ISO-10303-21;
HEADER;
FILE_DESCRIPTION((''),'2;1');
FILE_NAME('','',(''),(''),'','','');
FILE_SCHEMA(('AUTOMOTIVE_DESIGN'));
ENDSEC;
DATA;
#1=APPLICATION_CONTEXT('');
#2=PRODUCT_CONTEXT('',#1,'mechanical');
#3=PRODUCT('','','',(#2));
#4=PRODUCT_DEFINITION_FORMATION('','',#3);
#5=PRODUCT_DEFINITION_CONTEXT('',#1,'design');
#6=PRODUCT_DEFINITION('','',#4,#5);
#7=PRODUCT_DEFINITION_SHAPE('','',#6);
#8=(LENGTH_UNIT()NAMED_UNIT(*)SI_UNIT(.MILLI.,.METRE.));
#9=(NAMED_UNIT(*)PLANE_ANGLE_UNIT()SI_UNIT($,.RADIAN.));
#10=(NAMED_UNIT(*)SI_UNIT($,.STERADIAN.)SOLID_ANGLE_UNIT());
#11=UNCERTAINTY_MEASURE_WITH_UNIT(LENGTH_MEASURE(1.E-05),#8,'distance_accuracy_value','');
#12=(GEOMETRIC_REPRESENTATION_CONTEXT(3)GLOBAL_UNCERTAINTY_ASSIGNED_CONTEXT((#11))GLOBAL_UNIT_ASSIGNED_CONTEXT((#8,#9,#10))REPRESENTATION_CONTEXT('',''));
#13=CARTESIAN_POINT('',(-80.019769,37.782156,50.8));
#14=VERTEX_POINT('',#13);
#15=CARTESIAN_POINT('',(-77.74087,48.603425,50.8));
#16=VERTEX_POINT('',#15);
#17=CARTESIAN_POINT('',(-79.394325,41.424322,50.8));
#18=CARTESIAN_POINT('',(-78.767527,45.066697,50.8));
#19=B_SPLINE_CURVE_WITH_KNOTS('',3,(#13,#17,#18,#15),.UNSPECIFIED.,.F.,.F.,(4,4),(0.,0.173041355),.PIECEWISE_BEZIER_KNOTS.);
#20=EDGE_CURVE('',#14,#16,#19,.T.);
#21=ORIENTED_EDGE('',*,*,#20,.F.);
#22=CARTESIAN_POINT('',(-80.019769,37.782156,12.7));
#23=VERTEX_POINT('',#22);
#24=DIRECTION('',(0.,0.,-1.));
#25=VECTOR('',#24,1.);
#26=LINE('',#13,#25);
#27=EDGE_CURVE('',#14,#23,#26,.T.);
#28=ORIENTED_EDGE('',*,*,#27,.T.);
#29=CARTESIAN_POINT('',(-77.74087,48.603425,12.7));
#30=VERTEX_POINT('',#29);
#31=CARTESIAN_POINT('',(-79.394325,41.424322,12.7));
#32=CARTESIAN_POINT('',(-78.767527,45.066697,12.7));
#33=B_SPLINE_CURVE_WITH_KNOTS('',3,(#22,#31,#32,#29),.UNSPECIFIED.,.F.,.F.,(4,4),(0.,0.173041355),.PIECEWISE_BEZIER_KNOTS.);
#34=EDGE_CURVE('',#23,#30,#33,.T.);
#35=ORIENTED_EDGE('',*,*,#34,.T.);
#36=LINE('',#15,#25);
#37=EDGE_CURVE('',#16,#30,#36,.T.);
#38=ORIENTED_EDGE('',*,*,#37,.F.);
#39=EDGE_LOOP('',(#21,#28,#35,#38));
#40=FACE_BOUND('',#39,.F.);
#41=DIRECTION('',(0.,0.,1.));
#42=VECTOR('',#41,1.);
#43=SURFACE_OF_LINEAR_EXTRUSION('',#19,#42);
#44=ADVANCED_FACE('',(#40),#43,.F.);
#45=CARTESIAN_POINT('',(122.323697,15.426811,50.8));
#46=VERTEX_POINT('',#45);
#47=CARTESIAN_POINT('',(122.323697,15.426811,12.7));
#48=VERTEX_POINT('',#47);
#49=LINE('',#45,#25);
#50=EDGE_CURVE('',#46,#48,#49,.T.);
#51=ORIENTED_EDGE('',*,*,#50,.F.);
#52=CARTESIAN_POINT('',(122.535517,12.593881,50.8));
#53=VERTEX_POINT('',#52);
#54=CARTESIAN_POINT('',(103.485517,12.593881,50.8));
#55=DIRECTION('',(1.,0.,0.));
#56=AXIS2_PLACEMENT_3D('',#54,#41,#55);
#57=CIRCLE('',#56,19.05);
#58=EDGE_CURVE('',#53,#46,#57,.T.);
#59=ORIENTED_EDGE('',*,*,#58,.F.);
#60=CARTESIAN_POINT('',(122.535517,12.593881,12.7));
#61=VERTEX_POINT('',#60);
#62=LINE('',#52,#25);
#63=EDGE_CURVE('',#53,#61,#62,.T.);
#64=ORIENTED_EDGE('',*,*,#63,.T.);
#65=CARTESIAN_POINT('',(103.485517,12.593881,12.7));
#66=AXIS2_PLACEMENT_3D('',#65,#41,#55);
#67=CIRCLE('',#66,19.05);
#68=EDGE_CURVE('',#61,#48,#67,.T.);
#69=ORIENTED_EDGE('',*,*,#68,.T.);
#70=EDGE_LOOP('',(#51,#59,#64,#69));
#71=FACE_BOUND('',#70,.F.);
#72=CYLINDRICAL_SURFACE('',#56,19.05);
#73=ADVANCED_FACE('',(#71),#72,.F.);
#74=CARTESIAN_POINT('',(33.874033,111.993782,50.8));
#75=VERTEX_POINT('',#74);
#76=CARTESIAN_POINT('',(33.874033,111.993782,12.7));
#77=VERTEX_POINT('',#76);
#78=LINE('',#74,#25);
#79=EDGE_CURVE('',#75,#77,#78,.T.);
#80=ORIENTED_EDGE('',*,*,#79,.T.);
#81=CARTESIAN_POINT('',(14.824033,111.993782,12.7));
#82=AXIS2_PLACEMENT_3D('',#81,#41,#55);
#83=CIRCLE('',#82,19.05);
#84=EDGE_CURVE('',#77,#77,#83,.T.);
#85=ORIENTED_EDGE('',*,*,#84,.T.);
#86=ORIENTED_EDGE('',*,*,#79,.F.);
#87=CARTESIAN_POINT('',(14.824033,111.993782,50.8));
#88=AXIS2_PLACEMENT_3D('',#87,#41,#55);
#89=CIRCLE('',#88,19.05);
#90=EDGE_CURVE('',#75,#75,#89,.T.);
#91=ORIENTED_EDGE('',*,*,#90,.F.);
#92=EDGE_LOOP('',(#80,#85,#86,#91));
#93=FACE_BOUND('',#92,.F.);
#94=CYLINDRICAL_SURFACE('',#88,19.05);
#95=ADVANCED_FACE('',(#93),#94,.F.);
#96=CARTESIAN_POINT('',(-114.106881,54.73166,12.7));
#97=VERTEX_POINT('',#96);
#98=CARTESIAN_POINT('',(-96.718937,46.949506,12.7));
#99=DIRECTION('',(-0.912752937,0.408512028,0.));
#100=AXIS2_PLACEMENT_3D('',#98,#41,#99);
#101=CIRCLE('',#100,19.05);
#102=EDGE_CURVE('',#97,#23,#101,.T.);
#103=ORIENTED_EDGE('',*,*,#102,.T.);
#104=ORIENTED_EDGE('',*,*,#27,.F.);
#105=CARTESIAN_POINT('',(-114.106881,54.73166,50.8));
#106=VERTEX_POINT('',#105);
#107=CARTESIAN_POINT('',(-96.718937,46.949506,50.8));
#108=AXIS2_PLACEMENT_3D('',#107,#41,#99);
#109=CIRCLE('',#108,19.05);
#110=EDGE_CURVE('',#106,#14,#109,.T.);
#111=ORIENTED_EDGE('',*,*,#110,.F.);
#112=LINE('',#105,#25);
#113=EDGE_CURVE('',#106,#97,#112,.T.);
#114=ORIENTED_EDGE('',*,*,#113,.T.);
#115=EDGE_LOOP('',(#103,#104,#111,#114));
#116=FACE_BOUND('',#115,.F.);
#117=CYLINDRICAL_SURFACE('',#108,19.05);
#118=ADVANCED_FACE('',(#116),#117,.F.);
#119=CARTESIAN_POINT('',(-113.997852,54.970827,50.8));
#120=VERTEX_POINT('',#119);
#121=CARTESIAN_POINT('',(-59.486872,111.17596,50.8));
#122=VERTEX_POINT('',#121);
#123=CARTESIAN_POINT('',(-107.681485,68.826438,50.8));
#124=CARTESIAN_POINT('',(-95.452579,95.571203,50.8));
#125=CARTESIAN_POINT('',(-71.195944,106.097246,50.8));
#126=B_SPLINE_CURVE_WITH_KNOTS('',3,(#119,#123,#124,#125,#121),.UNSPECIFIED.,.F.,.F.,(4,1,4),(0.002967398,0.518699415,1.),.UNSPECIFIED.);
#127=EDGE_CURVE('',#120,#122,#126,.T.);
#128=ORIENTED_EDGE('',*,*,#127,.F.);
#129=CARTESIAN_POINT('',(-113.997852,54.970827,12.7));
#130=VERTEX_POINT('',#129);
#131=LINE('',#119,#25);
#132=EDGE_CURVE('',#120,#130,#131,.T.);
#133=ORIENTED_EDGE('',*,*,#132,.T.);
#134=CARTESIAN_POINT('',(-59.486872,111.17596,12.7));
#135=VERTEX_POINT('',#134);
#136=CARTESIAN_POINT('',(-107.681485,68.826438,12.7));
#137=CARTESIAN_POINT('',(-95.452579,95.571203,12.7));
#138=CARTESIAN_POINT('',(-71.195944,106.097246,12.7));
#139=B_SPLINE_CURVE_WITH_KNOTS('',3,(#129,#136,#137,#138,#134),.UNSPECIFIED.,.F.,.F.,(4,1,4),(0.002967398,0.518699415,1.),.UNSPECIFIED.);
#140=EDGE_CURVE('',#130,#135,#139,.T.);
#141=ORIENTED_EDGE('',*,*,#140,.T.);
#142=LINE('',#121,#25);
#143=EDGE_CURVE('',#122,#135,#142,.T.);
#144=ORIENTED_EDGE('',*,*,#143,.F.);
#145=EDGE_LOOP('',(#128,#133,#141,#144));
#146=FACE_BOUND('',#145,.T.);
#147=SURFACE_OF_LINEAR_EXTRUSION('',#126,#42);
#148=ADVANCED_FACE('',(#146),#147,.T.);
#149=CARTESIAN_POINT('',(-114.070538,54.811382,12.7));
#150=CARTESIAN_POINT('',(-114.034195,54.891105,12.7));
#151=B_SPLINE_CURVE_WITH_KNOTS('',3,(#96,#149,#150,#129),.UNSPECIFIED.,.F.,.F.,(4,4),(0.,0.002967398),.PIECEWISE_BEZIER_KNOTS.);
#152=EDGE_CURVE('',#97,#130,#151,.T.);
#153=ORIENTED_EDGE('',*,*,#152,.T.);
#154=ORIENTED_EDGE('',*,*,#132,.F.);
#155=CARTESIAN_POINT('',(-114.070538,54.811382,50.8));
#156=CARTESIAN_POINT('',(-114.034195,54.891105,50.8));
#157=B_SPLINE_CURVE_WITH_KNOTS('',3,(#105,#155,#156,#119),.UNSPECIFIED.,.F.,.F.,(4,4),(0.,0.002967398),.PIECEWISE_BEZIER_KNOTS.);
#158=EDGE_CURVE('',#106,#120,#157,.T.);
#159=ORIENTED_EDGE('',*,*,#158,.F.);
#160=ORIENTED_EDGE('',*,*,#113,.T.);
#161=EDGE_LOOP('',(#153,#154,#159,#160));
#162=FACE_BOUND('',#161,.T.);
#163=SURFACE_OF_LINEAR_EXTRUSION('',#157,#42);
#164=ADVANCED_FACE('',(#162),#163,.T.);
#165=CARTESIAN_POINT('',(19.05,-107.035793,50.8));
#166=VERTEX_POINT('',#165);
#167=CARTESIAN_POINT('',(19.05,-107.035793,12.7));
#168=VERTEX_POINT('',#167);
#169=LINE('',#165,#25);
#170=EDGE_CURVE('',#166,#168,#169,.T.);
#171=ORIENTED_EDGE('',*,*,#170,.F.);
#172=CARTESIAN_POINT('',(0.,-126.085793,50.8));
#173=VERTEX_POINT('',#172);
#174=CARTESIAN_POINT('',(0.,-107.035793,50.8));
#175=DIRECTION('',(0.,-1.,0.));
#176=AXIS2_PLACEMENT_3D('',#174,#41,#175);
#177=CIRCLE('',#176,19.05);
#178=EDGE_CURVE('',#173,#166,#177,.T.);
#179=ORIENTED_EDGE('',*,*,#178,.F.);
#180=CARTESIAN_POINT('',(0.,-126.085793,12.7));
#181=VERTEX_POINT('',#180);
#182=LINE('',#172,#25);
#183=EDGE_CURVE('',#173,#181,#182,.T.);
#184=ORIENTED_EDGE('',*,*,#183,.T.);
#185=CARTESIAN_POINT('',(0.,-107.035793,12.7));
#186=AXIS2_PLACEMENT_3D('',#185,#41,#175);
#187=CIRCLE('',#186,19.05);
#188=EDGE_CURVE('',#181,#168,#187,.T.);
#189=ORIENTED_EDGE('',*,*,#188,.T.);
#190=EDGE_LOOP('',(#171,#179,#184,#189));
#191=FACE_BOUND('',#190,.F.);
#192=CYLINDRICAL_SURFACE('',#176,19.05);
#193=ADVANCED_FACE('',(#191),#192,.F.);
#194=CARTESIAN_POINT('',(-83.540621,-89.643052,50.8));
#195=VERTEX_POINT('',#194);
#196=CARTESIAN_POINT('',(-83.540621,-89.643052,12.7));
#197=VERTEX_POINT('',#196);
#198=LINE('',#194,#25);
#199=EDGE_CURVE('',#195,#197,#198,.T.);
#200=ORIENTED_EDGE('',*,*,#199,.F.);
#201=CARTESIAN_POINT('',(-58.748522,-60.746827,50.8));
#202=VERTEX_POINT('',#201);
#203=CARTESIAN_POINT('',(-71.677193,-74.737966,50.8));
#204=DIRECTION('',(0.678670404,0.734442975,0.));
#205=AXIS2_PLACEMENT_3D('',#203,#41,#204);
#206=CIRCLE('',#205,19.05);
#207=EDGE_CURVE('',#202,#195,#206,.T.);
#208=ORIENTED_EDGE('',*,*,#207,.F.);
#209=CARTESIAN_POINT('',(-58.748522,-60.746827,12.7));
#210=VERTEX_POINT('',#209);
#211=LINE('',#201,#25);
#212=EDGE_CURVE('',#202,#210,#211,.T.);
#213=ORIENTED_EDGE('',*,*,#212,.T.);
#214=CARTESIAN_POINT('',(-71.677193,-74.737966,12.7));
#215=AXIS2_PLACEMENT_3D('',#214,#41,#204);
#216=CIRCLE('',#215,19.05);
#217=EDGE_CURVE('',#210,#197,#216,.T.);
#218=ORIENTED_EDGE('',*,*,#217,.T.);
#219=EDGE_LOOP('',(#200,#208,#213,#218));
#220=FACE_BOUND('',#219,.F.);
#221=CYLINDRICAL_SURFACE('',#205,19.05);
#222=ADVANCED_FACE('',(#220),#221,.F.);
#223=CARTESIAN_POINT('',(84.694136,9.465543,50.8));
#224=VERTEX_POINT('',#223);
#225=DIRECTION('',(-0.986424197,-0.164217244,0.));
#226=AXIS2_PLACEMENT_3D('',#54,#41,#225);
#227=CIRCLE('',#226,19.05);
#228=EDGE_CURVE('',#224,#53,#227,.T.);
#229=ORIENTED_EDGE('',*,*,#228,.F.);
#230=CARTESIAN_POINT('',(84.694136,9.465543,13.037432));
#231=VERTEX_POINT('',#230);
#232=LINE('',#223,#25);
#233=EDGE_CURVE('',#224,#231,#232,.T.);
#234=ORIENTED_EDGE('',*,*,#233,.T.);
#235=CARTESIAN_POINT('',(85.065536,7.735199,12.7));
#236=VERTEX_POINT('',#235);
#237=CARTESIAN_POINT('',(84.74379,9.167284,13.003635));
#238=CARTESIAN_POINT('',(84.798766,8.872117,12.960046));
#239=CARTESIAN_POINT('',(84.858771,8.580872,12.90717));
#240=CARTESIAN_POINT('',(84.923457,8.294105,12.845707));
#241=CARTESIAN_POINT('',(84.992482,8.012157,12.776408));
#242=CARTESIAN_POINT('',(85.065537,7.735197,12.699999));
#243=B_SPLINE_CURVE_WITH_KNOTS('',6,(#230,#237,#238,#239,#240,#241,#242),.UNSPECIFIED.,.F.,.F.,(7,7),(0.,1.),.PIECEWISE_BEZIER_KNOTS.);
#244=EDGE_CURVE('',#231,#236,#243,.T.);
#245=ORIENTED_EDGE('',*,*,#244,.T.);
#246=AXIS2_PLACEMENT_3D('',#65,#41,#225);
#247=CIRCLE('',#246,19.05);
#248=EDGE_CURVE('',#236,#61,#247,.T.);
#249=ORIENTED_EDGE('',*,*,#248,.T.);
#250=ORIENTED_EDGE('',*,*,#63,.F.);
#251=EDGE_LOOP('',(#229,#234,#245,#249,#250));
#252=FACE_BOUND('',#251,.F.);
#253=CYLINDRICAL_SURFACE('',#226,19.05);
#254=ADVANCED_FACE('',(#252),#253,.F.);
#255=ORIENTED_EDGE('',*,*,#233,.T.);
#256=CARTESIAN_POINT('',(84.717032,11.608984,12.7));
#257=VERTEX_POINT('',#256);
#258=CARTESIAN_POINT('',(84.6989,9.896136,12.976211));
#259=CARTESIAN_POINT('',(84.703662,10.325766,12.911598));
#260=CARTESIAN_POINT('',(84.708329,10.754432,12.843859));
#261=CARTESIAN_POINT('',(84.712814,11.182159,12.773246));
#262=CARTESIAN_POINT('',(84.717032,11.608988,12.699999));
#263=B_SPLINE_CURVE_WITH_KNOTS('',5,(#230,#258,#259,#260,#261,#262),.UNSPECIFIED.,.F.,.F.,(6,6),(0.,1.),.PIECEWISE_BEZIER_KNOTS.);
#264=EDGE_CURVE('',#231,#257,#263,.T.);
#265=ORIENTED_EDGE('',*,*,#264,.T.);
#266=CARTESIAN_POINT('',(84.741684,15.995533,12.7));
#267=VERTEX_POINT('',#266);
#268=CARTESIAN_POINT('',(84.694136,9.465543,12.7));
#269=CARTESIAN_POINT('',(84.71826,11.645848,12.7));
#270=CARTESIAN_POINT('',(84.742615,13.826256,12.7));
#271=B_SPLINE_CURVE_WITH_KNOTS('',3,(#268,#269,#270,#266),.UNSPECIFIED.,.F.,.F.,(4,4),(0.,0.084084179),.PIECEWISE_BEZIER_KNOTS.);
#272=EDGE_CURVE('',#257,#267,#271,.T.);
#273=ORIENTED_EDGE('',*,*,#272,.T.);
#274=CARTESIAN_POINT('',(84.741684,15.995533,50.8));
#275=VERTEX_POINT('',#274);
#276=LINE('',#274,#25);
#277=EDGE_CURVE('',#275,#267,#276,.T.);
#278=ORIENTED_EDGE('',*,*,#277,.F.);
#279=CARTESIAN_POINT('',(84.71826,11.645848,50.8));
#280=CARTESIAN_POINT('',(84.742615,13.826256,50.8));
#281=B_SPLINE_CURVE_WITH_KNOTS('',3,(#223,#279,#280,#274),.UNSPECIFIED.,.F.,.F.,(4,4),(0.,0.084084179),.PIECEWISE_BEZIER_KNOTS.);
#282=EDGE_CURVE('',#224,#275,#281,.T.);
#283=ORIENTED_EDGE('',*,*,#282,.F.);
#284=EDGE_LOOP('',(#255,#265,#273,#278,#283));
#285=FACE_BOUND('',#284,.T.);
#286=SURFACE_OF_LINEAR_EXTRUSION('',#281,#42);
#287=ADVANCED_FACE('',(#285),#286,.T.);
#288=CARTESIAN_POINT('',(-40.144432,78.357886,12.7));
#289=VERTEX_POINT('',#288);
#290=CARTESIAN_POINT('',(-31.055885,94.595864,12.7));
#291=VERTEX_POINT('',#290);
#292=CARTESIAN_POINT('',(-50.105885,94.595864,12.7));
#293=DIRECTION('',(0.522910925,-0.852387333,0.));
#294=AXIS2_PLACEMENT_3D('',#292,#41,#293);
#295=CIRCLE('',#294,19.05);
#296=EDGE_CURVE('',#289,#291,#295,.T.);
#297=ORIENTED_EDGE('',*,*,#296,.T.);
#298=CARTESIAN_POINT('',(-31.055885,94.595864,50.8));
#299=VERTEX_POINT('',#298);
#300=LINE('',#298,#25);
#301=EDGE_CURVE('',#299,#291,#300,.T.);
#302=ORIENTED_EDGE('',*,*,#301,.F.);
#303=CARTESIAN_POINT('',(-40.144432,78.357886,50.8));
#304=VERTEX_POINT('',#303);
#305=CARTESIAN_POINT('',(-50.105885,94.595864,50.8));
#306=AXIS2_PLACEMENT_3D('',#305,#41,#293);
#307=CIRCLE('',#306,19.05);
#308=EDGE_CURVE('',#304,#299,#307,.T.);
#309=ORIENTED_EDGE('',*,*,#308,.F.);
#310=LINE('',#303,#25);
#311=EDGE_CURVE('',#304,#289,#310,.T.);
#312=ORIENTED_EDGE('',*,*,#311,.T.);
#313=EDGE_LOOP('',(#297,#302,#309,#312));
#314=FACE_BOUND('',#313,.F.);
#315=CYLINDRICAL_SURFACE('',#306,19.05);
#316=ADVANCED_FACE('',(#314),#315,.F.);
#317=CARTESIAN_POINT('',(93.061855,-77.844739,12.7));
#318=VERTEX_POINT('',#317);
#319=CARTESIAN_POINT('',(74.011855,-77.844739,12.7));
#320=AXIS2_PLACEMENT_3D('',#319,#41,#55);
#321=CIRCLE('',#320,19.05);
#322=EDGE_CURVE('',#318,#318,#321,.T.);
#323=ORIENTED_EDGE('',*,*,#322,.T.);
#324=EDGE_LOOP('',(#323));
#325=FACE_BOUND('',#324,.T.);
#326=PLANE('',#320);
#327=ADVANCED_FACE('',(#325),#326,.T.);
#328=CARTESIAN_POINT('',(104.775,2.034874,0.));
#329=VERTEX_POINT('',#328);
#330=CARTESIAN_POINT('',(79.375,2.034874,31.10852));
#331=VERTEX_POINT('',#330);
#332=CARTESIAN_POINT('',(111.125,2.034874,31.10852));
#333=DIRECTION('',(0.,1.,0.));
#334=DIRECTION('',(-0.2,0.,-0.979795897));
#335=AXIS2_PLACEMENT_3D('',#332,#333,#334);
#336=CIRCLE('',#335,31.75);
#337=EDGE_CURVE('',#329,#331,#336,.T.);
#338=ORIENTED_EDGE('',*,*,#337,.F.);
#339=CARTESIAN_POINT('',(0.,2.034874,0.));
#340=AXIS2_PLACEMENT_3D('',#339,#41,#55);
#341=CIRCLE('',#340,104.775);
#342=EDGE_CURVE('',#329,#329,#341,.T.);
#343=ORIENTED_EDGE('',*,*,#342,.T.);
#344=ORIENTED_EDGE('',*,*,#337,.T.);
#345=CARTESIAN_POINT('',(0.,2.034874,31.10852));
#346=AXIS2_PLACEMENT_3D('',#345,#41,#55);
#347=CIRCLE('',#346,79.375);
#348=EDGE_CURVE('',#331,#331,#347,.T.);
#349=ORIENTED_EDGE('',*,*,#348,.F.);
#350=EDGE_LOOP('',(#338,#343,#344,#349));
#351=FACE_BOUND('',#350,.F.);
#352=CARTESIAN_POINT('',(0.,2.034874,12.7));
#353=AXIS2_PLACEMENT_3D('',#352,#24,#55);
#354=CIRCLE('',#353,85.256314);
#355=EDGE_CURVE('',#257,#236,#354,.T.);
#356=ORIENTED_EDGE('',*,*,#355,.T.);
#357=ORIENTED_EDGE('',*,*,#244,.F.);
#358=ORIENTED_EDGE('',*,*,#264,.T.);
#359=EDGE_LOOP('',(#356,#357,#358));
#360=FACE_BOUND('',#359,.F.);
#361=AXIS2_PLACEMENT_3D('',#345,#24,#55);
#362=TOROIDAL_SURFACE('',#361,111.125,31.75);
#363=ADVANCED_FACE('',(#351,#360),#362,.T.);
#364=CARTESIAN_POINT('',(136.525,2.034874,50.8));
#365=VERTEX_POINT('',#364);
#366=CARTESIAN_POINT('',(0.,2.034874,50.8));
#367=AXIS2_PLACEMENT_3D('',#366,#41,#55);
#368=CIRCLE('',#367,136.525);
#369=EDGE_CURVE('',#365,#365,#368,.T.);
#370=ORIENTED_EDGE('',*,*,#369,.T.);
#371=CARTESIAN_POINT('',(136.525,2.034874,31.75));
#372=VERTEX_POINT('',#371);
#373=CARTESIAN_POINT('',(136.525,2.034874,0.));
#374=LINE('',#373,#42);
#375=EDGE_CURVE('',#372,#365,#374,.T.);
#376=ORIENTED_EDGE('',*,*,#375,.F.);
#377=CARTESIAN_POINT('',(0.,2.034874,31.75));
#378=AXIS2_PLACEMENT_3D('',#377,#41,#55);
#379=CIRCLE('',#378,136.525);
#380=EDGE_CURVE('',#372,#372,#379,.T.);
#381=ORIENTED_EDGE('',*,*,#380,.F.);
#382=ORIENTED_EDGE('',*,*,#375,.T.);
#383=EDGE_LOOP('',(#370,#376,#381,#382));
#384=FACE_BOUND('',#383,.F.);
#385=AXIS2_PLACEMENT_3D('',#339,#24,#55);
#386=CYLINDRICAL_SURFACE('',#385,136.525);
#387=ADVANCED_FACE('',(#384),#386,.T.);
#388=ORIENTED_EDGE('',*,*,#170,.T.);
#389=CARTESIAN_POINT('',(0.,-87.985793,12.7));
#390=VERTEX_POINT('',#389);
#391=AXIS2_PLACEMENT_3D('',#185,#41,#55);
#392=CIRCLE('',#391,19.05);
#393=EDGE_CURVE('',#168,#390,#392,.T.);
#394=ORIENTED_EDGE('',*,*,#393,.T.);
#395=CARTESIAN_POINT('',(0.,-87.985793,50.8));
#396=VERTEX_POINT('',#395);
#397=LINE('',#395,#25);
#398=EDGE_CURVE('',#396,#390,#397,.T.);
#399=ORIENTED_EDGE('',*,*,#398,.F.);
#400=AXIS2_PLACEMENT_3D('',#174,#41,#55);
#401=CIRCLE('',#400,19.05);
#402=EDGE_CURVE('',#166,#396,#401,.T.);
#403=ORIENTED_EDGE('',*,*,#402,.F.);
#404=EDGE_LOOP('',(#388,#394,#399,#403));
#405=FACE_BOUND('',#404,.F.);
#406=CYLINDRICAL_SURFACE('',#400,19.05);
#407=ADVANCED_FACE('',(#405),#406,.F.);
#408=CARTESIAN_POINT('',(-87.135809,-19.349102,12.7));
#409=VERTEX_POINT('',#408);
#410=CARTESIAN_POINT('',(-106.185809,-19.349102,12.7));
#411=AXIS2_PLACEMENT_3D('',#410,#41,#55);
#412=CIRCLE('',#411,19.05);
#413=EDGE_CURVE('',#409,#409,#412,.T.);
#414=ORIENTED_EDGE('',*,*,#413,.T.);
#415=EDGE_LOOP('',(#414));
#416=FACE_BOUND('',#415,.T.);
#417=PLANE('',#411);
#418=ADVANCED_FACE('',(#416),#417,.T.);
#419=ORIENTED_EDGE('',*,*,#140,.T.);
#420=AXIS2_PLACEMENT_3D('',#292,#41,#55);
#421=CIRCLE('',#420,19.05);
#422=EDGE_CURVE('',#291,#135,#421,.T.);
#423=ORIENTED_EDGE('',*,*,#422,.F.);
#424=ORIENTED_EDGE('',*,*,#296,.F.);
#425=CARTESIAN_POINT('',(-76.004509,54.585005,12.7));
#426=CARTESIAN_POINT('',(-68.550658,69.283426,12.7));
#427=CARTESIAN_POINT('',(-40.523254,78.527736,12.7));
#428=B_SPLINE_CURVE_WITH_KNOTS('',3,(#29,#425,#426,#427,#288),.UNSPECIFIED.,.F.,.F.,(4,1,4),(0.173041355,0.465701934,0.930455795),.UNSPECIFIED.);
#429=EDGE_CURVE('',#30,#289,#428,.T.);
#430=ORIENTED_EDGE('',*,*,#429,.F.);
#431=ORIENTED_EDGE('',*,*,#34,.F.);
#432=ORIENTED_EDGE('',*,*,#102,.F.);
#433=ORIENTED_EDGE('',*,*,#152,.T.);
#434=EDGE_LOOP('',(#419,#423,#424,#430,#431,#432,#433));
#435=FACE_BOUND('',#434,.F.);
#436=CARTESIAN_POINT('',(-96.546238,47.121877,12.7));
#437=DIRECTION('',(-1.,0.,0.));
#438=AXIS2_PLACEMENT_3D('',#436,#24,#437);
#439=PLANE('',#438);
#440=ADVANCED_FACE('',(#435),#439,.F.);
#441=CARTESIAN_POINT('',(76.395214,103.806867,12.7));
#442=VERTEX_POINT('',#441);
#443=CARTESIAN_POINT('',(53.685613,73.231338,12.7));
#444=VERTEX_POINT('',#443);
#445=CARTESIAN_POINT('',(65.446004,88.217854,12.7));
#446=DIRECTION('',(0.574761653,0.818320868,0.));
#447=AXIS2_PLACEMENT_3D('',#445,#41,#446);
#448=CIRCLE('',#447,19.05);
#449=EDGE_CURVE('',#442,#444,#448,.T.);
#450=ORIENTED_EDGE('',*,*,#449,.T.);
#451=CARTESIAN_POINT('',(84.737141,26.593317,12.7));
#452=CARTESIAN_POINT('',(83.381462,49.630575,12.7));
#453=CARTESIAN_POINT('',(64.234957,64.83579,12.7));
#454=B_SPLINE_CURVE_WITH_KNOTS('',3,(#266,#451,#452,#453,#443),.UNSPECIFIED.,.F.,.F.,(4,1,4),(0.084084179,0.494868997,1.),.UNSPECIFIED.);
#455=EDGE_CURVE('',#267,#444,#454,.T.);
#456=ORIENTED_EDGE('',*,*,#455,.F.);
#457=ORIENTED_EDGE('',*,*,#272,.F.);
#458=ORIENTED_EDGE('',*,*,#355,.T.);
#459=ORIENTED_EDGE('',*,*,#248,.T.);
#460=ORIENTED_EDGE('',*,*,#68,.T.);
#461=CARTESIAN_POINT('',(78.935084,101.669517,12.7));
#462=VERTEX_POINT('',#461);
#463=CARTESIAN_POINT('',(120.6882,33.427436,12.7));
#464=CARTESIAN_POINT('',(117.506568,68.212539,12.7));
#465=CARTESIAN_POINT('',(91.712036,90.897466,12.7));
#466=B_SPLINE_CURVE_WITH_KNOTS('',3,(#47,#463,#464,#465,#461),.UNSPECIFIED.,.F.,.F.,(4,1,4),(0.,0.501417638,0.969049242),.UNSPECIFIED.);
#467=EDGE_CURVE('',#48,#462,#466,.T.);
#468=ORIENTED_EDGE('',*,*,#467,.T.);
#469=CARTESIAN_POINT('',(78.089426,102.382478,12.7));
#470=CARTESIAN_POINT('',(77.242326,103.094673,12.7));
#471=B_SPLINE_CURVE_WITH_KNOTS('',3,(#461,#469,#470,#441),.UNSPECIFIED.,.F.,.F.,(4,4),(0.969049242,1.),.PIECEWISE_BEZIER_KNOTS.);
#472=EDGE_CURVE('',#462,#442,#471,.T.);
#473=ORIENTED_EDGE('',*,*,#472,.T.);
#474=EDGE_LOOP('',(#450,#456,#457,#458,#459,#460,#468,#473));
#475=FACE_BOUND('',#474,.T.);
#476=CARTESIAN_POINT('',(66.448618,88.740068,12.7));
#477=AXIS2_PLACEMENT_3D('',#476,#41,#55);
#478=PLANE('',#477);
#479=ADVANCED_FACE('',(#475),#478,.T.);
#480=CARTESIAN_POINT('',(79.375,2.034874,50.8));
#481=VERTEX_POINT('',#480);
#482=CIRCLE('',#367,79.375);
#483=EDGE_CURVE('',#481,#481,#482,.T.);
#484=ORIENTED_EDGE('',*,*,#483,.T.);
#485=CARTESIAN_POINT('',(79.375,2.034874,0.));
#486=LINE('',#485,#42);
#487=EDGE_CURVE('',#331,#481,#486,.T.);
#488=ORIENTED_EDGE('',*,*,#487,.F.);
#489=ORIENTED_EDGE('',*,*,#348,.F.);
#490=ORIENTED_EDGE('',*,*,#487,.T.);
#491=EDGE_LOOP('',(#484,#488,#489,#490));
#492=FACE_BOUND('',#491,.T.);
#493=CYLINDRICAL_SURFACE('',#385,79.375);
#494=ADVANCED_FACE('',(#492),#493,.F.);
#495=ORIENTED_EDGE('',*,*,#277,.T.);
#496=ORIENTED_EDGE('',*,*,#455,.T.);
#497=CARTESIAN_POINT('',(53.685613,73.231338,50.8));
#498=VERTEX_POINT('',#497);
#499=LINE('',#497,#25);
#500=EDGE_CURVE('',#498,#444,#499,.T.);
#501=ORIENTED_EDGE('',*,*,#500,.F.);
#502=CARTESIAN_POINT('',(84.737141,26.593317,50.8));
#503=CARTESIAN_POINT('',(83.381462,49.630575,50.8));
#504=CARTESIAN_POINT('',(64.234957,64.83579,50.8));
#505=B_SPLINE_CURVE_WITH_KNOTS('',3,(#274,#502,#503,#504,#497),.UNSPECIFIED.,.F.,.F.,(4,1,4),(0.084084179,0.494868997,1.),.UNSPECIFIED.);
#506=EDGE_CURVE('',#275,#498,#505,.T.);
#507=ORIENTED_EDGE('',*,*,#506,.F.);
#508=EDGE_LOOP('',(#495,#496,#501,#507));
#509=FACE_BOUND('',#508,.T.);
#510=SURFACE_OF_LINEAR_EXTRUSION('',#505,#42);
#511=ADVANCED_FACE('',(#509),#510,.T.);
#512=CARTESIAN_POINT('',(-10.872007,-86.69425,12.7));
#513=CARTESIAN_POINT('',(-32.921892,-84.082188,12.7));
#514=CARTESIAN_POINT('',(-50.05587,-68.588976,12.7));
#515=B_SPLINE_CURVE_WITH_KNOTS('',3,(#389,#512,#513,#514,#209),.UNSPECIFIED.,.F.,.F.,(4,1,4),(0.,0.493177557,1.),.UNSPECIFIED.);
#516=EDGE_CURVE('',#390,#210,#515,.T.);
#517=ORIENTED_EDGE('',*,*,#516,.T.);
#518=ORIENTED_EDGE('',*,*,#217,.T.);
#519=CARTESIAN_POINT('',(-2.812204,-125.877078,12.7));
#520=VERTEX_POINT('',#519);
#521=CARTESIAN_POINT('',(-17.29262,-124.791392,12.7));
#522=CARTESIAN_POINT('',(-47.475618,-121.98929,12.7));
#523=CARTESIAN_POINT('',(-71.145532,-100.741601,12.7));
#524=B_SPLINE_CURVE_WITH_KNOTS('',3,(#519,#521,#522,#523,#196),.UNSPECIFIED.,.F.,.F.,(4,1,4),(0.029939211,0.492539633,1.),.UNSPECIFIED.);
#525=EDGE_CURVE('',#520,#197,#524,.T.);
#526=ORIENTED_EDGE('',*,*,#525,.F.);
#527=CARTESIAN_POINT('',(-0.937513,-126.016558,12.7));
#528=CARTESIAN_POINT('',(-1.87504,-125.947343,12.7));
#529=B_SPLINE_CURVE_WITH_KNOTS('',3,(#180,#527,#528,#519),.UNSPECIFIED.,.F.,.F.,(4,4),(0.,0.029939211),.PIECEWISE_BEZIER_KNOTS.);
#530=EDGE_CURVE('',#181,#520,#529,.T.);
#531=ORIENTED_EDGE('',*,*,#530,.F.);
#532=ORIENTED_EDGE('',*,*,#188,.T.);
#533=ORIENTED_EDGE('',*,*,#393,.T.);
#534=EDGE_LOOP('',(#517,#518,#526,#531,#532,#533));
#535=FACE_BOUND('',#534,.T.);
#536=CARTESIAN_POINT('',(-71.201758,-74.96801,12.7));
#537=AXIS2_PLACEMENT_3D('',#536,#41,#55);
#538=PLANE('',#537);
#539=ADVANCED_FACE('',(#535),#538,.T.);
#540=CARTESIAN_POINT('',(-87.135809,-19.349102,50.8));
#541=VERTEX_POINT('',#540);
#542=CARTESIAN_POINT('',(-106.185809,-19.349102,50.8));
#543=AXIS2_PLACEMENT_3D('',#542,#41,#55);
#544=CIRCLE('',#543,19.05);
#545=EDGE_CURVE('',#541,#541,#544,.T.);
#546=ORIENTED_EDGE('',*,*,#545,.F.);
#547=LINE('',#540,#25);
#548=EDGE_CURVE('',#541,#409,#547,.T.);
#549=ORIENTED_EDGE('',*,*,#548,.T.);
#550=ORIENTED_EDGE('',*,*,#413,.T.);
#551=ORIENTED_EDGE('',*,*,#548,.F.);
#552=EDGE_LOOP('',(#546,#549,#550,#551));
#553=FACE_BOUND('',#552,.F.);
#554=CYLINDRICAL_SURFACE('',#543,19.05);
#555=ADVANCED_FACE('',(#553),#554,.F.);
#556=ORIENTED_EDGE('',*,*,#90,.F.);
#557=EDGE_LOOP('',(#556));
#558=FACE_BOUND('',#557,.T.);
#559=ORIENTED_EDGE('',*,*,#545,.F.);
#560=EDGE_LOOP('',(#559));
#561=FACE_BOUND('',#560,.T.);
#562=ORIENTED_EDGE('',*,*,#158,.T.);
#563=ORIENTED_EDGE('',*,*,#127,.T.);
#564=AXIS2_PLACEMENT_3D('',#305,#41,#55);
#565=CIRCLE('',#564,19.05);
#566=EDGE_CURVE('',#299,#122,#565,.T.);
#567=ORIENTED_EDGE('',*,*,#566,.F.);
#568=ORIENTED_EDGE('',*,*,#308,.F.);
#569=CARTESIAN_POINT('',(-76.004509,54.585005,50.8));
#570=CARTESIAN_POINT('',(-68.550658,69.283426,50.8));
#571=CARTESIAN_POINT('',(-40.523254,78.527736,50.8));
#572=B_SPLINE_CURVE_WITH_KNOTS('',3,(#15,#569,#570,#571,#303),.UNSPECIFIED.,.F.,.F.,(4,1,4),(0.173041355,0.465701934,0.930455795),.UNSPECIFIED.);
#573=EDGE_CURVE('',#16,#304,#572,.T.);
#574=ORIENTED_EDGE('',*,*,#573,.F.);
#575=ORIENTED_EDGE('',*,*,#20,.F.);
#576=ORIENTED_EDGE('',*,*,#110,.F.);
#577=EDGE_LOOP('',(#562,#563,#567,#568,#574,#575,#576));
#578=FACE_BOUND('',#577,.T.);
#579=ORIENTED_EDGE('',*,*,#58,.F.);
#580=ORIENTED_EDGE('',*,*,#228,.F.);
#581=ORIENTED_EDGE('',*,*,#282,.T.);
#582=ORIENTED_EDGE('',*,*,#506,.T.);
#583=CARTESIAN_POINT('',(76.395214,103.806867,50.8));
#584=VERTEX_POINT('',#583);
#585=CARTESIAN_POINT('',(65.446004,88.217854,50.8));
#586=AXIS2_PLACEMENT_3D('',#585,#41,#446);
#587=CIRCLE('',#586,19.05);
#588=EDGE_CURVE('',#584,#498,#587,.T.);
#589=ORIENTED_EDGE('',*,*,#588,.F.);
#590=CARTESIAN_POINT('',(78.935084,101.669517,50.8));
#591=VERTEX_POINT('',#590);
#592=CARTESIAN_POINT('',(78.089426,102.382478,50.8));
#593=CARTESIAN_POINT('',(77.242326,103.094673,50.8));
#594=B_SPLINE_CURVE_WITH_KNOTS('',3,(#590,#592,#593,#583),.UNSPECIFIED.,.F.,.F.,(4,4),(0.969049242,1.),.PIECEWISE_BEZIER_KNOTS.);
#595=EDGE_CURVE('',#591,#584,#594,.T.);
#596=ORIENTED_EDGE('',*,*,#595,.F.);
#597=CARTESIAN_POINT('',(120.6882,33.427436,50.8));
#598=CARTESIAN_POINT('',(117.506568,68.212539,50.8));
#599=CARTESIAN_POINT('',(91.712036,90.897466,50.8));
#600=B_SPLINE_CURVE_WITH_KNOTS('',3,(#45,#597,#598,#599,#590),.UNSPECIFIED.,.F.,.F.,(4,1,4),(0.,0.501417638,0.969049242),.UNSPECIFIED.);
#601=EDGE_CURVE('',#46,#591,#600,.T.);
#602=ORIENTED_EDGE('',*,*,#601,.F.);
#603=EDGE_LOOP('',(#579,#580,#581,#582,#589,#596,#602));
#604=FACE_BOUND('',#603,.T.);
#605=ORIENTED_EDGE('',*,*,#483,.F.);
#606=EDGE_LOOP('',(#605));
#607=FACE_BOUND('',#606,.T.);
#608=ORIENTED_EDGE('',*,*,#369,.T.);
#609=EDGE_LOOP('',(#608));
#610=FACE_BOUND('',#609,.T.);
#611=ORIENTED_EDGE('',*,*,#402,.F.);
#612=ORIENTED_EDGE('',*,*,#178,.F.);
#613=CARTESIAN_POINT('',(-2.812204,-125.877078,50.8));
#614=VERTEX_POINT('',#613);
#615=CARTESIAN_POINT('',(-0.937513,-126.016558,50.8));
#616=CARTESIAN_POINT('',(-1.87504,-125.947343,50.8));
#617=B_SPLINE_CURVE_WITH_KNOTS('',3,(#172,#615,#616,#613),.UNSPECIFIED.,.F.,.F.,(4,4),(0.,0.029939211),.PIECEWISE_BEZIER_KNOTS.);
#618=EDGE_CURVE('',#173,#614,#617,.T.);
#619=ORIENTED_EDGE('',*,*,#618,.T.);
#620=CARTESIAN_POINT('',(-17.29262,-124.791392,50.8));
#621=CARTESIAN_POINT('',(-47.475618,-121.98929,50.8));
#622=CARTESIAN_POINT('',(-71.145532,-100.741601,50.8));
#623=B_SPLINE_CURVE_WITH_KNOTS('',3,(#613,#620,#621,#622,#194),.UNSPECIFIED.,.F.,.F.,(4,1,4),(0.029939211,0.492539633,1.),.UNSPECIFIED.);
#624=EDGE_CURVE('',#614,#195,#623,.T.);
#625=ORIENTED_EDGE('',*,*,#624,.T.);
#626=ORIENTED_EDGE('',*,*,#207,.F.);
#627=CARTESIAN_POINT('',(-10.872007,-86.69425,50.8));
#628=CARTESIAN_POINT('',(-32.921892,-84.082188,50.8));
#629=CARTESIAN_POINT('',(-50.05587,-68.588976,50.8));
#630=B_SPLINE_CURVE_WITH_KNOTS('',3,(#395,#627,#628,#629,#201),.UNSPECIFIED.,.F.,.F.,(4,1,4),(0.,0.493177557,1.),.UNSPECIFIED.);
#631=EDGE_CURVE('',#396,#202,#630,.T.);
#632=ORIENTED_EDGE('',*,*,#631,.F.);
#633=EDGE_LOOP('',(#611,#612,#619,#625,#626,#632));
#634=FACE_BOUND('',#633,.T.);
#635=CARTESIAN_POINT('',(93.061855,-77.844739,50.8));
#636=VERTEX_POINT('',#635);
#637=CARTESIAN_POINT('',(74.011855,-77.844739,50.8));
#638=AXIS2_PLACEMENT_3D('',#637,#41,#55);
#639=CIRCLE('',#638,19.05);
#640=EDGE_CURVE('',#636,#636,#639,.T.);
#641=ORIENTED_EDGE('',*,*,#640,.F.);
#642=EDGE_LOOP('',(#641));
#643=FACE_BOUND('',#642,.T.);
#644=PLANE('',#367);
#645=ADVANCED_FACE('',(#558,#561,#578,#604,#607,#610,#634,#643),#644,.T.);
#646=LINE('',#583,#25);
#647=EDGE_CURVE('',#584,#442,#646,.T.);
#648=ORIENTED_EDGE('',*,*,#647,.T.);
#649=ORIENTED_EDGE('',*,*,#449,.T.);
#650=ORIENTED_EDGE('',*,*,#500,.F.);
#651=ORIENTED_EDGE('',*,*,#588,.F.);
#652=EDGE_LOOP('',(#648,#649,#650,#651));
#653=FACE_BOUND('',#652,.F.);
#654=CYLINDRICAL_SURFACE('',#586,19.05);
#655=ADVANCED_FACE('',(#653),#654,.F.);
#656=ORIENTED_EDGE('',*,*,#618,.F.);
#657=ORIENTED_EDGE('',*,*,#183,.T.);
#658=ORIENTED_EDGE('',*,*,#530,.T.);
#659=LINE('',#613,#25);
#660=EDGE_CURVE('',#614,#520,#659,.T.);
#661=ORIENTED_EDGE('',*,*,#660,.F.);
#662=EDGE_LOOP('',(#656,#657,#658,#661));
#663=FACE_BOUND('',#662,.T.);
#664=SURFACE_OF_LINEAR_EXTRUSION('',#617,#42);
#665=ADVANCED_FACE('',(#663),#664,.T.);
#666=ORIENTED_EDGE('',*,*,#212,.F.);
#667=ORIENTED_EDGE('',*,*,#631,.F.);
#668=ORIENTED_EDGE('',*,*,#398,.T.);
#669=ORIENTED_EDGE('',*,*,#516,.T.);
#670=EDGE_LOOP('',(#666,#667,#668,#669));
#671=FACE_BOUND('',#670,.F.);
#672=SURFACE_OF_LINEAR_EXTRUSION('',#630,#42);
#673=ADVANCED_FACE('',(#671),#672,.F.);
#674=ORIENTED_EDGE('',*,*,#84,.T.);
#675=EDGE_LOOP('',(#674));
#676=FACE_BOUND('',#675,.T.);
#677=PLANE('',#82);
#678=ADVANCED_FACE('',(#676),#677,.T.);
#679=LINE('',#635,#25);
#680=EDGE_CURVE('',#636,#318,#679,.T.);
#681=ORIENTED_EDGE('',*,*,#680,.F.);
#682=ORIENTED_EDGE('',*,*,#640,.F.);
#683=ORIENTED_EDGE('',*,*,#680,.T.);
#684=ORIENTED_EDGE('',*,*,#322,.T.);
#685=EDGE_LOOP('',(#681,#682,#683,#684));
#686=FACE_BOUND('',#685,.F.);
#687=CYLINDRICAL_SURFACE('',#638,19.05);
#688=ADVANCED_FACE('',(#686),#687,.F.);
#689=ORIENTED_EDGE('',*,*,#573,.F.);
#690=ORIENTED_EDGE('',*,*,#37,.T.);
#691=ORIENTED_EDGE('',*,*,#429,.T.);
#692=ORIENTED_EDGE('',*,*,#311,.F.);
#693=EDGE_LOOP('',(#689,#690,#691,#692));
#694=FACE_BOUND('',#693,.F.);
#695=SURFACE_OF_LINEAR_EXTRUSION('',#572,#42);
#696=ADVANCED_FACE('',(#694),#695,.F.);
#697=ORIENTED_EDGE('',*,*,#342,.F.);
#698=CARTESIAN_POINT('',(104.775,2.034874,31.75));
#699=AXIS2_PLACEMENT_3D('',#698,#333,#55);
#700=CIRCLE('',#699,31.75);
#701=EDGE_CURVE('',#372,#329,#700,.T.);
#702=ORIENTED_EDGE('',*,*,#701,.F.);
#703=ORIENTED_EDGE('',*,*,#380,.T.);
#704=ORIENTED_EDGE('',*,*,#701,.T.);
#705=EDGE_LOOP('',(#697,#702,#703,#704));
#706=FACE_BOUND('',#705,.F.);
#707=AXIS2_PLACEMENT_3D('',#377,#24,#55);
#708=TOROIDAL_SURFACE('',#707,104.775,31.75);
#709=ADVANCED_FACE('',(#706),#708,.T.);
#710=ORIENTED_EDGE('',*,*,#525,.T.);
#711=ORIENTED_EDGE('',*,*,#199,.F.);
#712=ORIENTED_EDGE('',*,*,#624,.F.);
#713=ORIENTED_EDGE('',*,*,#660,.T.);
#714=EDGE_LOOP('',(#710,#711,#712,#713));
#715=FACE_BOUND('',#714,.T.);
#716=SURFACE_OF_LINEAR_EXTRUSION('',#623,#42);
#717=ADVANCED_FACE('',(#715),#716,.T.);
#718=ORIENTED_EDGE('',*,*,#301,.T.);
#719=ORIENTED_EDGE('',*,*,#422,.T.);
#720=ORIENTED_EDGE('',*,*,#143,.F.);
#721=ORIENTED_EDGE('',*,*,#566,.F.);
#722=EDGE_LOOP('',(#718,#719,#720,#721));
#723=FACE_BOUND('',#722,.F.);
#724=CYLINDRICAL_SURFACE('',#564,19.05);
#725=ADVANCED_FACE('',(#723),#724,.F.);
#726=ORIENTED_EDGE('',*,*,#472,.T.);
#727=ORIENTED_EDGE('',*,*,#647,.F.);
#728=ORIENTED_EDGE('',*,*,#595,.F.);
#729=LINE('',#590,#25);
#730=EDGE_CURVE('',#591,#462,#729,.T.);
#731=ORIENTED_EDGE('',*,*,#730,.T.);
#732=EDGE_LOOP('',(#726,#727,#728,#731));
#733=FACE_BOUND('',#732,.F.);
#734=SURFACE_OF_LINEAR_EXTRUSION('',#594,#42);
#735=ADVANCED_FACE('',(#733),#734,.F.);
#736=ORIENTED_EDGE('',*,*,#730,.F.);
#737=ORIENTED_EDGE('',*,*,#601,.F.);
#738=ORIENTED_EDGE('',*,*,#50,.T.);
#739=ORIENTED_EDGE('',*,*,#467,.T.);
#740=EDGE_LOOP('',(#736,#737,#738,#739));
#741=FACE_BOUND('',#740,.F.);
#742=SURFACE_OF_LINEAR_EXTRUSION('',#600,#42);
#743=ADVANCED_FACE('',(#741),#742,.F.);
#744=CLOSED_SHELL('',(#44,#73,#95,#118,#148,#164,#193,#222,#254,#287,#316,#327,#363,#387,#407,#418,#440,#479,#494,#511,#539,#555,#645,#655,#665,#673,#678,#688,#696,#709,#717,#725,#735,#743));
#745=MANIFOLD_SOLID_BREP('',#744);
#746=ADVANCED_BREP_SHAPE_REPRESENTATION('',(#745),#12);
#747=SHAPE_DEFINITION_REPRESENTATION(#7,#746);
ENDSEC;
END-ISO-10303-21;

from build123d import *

# Parameters (mm, degrees)
F0_R     = 136.525
F0_R_2   = 79.375
F1_DEPTH = 50.8
F2_R     = 31.75
F4_R     = 19.05
F5_DEPTH = 38.1


# Not quite as in the source:
# - a fillet or chamfer that OpenCascade refuses, or shapes differently, is made with other operations: its cross-section is extruded or revolved along the edge and cut away or added


with BuildPart() as f1:
    # F0 (on Top) → F1 (new body)
    with BuildSketch(Plane.XY):
        with Locations((0, 2.0348737297)):
            Circle(F0_R)
        with Locations((0, 2.0348737297)):
            Circle(F0_R_2, mode=Mode.SUBTRACT)
    extrude(amount=F1_DEPTH)

    # F2
    f2_edges = [f1.edges().sort_by_distance(p)[0] for p in [
        (-136.525, 2.034874, 0),
    ]]
    fillet(f2_edges, radius=F2_R)

    # F3: fillet of radius 31.75 on 1 edges, made by hand

    # F3_s1 → F3_t2 (revolve, cut)
    with BuildSketch(Plane.XZ.offset(-2.0348737297)):
        with BuildLine():
            ThreePointArc((104.775, 0), (86.5315557516, 11.0280565913), (79.375, 31.1085197333))
            Line((79.375, 31.1085197333), (79.375, 0))
            Line((79.375, 0), (104.775, 0))
        make_face()
    revolve(axis=Axis((0, 2.0348737297, 0), (0, 0, 1)), mode=Mode.SUBTRACT)

    # F4 (on face) → F5 (cut)
    with BuildSketch(Plane.XY.offset(50.8)):
        with BuildLine():
            ThreePointArc((-83.5406207988, -89.6430518351), (-63.4036145785, -91.8975231455), (-52.6271930456, -74.7379660606))
            ThreePointArc((-52.6271930456, -74.7379660606), (-54.2244900151, -67.1021519632), (-58.7485218572, -60.74682739))
            ThreePointArc((-58.7485218572, -60.74682739), (-86.1351193385, -62.3334964102), (-83.5406207988, -89.6430518351))
        make_face()
        with BuildLine():
            ThreePointArc((-58.7485218572, -60.74682739), (-54.2244900151, -67.1021519632), (-52.6271930456, -74.7379660606))
            ThreePointArc((-52.6271930456, -74.7379660606), (-63.4036145785, -91.8975231455), (-83.5406207988, -89.6430518351))
            add(Edge.make_bspline(
                [(-2.8122035096, -125.8770781244), (-17.2926198403, -124.7913924318), (-47.475617869, -121.9892901593), (-71.1455318862, -100.7416006213), (-83.5406207988, -89.6430518351)],
                knots=[0.0299392112, 0.0299392112, 0.0299392112, 0.0299392112, 0.492539633, 1, 1, 1, 1], degree=3))
            ThreePointArc((-2.8122035096, -125.8770781244), (-18.9977495336, -105.6258243369), (0, -87.985793364))
            add(Edge.make_bspline(
                [(0, -87.985793364), (-10.8720074629, -86.6942500904), (-32.9218918222, -84.0821884123), (-50.0558702898, -68.5889761619), (-58.7485218572, -60.74682739)],
                knots=[0, 0, 0, 0, 0.493177557, 1, 1, 1, 1], degree=3))
        make_face()
        with BuildLine():
            ThreePointArc((19.05, -107.035793364), (13.4703841816, -93.5654091824), (0, -87.985793364))
            ThreePointArc((0, -87.985793364), (-18.9977495336, -105.6258243369), (-2.8122035096, -125.8770781244))
            add(Edge.make_bspline(
                [(0, -126.085793364), (-0.9375128174, -126.0165583722), (-1.8750399814, -125.9473430264), (-2.8122035096, -125.8770781244)],
                knots=[0, 0, 0, 0, 0.0299392112, 0.0299392112, 0.0299392112, 0.0299392112], degree=3))
            ThreePointArc((0, -126.085793364), (13.4703841816, -120.5061775457), (19.05, -107.035793364))
        make_face()
        with Locations((74.0118548274, -77.8447389603)):
            Circle(F4_R)
        with BuildLine():
            add(Edge.make_bspline(
                [(78.9350842893, 101.6695168607), (78.0894264406, 102.3824779177), (77.2423258351, 103.0946725571), (76.3952137559, 103.80686703)],
                knots=[0.9690492423, 0.9690492423, 0.9690492423, 0.9690492423, 1, 1, 1, 1], degree=3))
            ThreePointArc((76.3952137559, 103.80686703), (50.1528602496, 99.5766504715), (53.6856126427, 73.2313376017))
            ThreePointArc((53.6856126427, 73.2313376017), (73.7786820966, 71.0869181488), (84.4960042715, 88.2178544998))
            ThreePointArc((84.4960042715, 88.2178544998), (83.0509676958, 95.4957499944), (78.9350842893, 101.6695168607))
        make_face()
        with BuildLine():
            ThreePointArc((84.4960042715, 88.2178544998), (73.7786820966, 71.0869181488), (53.6856126427, 73.2313376017))
            add(Edge.make_bspline(
                [(84.7416844545, 15.995532865), (84.7371406471, 26.5933171928), (83.3814622914, 49.6305752088), (64.2349565752, 64.8357897445), (53.6856126427, 73.2313376017)],
                knots=[0.0840841786, 0.0840841786, 0.0840841786, 0.0840841786, 0.4948689966, 1, 1, 1, 1], degree=3))
            ThreePointArc((84.7416844545, 15.995532865), (103.773764442, 31.641700355), (122.3236967579, 15.4268109984))
            add(Edge.make_bspline(
                [(122.3236967579, 15.4268109984), (120.6881998826, 33.4274356769), (117.5065684963, 68.2125390548), (91.7120360038, 90.8974664243), (78.9350842893, 101.6695168607)],
                knots=[0, 0, 0, 0, 0.5014176382, 0.9690492423, 0.9690492423, 0.9690492423, 0.9690492423], degree=3))
            ThreePointArc((78.9350842893, 101.6695168607), (83.0509676958, 95.4957499944), (84.4960042715, 88.2178544998))
        make_face()
        with BuildLine():
            ThreePointArc((122.3236967579, 15.4268109984), (103.773764442, 31.641700355), (84.7416844545, 15.995532865))
            add(Edge.make_bspline(
                [(84.6941362488, 9.4655427217), (84.7182599274, 11.6458483909), (84.7426145335, 13.8262560296), (84.7416844545, 15.995532865)],
                knots=[0, 0, 0, 0, 0.0840841786, 0.0840841786, 0.0840841786, 0.0840841786], degree=3))
            ThreePointArc((84.6941362488, 9.4655427217), (105.0550223499, -6.3913539202), (122.5355172038, 12.5938812271))
            ThreePointArc((122.5355172038, 12.5938812271), (122.4824882848, 14.0143000905), (122.3236967579, 15.4268109984))
        make_face()
        with Locations((-106.1858087778, -19.3491019309)):
            Circle(F4_R)
        with Locations((14.8240327835, 111.9937822223)):
            Circle(F4_R)
        with BuildLine():
            add(Edge.make_bspline(
                [(-114.1068806006, 54.731659933), (-114.0705377389, 54.8113823903), (-114.0341951825, 54.8911049607), (-113.9978523202, 54.9708268217)],
                knots=[0, 0, 0, 0, 0.0029673982, 0.0029673982, 0.0029673982, 0.0029673982], degree=3))
            ThreePointArc((-114.1068806006, 54.731659933), (-105.2006835176, 29.8918835009), (-80.0197694208, 37.7821563054))
            add(Edge.make_bspline(
                [(-80.0197694208, 37.7821563054), (-79.3943245384, 41.4243222007), (-78.7675270407, 45.0666971781), (-77.740869501, 48.6034247835)],
                knots=[0, 0, 0, 0, 0.1730413551, 0.1730413551, 0.1730413551, 0.1730413551], degree=3))
            ThreePointArc((-77.740869501, 48.6034247835), (-93.4238298796, 65.7123618791), (-113.9978523202, 54.9708268217))
        make_face()
        with BuildLine():
            add(Edge.make_bspline(
                [(-113.9978523202, 54.9708268217), (-107.6814847314, 68.8264382664), (-95.452579475, 95.5712033941), (-71.1959439676, 106.0972459264), (-59.4868722066, 111.1759600983)],
                knots=[0.0029673982, 0.0029673982, 0.0029673982, 0.0029673982, 0.5186994147, 1, 1, 1, 1], degree=3))
            ThreePointArc((-113.9978523202, 54.9708268217), (-93.4238298796, 65.7123618791), (-77.740869501, 48.6034247835))
            add(Edge.make_bspline(
                [(-77.740869501, 48.6034247835), (-76.0045089103, 54.5850050058), (-70.5050739876, 65.4294674019), (-53.8065169404, 73.305008588), (-47.9266097256, 75.67092688)],
                knots=[0.1730413551, 0.1730413551, 0.1730413551, 0.1730413551, 0.4657019337, 0.7318600546, 0.7318600546, 0.7318600546, 0.7318600546], degree=3))
            ThreePointArc((-47.9266097256, 75.67092688), (-68.2199127162, 88.6980268466), (-59.4868722066, 111.1759600983))
        make_face()
        with BuildLine():
            ThreePointArc((-31.0558846712, 94.5958644152), (-40.5091485737, 111.0520230275), (-59.4868722066, 111.1759600983))
            ThreePointArc((-59.4868722066, 111.1759600983), (-68.2199127162, 88.6980268466), (-47.9266097256, 75.67092688))
            add(Edge.make_bspline(
                [(-47.9266097256, 75.67092688), (-43.5392758956, 77.4362733357), (-40.3063077929, 78.4304649494), (-40.1444315528, 78.3578857303)],
                knots=[0.7318600546, 0.7318600546, 0.7318600546, 0.7318600546, 0.9304557952, 0.9304557952, 0.9304557952, 0.9304557952], degree=3))
            ThreePointArc((-40.1444315528, 78.3578857303), (-33.4825850303, 85.29164983), (-31.0558846712, 94.5958644152))
        make_face()
    extrude(amount=-F5_DEPTH, mode=Mode.SUBTRACT)


solid = f1.part
